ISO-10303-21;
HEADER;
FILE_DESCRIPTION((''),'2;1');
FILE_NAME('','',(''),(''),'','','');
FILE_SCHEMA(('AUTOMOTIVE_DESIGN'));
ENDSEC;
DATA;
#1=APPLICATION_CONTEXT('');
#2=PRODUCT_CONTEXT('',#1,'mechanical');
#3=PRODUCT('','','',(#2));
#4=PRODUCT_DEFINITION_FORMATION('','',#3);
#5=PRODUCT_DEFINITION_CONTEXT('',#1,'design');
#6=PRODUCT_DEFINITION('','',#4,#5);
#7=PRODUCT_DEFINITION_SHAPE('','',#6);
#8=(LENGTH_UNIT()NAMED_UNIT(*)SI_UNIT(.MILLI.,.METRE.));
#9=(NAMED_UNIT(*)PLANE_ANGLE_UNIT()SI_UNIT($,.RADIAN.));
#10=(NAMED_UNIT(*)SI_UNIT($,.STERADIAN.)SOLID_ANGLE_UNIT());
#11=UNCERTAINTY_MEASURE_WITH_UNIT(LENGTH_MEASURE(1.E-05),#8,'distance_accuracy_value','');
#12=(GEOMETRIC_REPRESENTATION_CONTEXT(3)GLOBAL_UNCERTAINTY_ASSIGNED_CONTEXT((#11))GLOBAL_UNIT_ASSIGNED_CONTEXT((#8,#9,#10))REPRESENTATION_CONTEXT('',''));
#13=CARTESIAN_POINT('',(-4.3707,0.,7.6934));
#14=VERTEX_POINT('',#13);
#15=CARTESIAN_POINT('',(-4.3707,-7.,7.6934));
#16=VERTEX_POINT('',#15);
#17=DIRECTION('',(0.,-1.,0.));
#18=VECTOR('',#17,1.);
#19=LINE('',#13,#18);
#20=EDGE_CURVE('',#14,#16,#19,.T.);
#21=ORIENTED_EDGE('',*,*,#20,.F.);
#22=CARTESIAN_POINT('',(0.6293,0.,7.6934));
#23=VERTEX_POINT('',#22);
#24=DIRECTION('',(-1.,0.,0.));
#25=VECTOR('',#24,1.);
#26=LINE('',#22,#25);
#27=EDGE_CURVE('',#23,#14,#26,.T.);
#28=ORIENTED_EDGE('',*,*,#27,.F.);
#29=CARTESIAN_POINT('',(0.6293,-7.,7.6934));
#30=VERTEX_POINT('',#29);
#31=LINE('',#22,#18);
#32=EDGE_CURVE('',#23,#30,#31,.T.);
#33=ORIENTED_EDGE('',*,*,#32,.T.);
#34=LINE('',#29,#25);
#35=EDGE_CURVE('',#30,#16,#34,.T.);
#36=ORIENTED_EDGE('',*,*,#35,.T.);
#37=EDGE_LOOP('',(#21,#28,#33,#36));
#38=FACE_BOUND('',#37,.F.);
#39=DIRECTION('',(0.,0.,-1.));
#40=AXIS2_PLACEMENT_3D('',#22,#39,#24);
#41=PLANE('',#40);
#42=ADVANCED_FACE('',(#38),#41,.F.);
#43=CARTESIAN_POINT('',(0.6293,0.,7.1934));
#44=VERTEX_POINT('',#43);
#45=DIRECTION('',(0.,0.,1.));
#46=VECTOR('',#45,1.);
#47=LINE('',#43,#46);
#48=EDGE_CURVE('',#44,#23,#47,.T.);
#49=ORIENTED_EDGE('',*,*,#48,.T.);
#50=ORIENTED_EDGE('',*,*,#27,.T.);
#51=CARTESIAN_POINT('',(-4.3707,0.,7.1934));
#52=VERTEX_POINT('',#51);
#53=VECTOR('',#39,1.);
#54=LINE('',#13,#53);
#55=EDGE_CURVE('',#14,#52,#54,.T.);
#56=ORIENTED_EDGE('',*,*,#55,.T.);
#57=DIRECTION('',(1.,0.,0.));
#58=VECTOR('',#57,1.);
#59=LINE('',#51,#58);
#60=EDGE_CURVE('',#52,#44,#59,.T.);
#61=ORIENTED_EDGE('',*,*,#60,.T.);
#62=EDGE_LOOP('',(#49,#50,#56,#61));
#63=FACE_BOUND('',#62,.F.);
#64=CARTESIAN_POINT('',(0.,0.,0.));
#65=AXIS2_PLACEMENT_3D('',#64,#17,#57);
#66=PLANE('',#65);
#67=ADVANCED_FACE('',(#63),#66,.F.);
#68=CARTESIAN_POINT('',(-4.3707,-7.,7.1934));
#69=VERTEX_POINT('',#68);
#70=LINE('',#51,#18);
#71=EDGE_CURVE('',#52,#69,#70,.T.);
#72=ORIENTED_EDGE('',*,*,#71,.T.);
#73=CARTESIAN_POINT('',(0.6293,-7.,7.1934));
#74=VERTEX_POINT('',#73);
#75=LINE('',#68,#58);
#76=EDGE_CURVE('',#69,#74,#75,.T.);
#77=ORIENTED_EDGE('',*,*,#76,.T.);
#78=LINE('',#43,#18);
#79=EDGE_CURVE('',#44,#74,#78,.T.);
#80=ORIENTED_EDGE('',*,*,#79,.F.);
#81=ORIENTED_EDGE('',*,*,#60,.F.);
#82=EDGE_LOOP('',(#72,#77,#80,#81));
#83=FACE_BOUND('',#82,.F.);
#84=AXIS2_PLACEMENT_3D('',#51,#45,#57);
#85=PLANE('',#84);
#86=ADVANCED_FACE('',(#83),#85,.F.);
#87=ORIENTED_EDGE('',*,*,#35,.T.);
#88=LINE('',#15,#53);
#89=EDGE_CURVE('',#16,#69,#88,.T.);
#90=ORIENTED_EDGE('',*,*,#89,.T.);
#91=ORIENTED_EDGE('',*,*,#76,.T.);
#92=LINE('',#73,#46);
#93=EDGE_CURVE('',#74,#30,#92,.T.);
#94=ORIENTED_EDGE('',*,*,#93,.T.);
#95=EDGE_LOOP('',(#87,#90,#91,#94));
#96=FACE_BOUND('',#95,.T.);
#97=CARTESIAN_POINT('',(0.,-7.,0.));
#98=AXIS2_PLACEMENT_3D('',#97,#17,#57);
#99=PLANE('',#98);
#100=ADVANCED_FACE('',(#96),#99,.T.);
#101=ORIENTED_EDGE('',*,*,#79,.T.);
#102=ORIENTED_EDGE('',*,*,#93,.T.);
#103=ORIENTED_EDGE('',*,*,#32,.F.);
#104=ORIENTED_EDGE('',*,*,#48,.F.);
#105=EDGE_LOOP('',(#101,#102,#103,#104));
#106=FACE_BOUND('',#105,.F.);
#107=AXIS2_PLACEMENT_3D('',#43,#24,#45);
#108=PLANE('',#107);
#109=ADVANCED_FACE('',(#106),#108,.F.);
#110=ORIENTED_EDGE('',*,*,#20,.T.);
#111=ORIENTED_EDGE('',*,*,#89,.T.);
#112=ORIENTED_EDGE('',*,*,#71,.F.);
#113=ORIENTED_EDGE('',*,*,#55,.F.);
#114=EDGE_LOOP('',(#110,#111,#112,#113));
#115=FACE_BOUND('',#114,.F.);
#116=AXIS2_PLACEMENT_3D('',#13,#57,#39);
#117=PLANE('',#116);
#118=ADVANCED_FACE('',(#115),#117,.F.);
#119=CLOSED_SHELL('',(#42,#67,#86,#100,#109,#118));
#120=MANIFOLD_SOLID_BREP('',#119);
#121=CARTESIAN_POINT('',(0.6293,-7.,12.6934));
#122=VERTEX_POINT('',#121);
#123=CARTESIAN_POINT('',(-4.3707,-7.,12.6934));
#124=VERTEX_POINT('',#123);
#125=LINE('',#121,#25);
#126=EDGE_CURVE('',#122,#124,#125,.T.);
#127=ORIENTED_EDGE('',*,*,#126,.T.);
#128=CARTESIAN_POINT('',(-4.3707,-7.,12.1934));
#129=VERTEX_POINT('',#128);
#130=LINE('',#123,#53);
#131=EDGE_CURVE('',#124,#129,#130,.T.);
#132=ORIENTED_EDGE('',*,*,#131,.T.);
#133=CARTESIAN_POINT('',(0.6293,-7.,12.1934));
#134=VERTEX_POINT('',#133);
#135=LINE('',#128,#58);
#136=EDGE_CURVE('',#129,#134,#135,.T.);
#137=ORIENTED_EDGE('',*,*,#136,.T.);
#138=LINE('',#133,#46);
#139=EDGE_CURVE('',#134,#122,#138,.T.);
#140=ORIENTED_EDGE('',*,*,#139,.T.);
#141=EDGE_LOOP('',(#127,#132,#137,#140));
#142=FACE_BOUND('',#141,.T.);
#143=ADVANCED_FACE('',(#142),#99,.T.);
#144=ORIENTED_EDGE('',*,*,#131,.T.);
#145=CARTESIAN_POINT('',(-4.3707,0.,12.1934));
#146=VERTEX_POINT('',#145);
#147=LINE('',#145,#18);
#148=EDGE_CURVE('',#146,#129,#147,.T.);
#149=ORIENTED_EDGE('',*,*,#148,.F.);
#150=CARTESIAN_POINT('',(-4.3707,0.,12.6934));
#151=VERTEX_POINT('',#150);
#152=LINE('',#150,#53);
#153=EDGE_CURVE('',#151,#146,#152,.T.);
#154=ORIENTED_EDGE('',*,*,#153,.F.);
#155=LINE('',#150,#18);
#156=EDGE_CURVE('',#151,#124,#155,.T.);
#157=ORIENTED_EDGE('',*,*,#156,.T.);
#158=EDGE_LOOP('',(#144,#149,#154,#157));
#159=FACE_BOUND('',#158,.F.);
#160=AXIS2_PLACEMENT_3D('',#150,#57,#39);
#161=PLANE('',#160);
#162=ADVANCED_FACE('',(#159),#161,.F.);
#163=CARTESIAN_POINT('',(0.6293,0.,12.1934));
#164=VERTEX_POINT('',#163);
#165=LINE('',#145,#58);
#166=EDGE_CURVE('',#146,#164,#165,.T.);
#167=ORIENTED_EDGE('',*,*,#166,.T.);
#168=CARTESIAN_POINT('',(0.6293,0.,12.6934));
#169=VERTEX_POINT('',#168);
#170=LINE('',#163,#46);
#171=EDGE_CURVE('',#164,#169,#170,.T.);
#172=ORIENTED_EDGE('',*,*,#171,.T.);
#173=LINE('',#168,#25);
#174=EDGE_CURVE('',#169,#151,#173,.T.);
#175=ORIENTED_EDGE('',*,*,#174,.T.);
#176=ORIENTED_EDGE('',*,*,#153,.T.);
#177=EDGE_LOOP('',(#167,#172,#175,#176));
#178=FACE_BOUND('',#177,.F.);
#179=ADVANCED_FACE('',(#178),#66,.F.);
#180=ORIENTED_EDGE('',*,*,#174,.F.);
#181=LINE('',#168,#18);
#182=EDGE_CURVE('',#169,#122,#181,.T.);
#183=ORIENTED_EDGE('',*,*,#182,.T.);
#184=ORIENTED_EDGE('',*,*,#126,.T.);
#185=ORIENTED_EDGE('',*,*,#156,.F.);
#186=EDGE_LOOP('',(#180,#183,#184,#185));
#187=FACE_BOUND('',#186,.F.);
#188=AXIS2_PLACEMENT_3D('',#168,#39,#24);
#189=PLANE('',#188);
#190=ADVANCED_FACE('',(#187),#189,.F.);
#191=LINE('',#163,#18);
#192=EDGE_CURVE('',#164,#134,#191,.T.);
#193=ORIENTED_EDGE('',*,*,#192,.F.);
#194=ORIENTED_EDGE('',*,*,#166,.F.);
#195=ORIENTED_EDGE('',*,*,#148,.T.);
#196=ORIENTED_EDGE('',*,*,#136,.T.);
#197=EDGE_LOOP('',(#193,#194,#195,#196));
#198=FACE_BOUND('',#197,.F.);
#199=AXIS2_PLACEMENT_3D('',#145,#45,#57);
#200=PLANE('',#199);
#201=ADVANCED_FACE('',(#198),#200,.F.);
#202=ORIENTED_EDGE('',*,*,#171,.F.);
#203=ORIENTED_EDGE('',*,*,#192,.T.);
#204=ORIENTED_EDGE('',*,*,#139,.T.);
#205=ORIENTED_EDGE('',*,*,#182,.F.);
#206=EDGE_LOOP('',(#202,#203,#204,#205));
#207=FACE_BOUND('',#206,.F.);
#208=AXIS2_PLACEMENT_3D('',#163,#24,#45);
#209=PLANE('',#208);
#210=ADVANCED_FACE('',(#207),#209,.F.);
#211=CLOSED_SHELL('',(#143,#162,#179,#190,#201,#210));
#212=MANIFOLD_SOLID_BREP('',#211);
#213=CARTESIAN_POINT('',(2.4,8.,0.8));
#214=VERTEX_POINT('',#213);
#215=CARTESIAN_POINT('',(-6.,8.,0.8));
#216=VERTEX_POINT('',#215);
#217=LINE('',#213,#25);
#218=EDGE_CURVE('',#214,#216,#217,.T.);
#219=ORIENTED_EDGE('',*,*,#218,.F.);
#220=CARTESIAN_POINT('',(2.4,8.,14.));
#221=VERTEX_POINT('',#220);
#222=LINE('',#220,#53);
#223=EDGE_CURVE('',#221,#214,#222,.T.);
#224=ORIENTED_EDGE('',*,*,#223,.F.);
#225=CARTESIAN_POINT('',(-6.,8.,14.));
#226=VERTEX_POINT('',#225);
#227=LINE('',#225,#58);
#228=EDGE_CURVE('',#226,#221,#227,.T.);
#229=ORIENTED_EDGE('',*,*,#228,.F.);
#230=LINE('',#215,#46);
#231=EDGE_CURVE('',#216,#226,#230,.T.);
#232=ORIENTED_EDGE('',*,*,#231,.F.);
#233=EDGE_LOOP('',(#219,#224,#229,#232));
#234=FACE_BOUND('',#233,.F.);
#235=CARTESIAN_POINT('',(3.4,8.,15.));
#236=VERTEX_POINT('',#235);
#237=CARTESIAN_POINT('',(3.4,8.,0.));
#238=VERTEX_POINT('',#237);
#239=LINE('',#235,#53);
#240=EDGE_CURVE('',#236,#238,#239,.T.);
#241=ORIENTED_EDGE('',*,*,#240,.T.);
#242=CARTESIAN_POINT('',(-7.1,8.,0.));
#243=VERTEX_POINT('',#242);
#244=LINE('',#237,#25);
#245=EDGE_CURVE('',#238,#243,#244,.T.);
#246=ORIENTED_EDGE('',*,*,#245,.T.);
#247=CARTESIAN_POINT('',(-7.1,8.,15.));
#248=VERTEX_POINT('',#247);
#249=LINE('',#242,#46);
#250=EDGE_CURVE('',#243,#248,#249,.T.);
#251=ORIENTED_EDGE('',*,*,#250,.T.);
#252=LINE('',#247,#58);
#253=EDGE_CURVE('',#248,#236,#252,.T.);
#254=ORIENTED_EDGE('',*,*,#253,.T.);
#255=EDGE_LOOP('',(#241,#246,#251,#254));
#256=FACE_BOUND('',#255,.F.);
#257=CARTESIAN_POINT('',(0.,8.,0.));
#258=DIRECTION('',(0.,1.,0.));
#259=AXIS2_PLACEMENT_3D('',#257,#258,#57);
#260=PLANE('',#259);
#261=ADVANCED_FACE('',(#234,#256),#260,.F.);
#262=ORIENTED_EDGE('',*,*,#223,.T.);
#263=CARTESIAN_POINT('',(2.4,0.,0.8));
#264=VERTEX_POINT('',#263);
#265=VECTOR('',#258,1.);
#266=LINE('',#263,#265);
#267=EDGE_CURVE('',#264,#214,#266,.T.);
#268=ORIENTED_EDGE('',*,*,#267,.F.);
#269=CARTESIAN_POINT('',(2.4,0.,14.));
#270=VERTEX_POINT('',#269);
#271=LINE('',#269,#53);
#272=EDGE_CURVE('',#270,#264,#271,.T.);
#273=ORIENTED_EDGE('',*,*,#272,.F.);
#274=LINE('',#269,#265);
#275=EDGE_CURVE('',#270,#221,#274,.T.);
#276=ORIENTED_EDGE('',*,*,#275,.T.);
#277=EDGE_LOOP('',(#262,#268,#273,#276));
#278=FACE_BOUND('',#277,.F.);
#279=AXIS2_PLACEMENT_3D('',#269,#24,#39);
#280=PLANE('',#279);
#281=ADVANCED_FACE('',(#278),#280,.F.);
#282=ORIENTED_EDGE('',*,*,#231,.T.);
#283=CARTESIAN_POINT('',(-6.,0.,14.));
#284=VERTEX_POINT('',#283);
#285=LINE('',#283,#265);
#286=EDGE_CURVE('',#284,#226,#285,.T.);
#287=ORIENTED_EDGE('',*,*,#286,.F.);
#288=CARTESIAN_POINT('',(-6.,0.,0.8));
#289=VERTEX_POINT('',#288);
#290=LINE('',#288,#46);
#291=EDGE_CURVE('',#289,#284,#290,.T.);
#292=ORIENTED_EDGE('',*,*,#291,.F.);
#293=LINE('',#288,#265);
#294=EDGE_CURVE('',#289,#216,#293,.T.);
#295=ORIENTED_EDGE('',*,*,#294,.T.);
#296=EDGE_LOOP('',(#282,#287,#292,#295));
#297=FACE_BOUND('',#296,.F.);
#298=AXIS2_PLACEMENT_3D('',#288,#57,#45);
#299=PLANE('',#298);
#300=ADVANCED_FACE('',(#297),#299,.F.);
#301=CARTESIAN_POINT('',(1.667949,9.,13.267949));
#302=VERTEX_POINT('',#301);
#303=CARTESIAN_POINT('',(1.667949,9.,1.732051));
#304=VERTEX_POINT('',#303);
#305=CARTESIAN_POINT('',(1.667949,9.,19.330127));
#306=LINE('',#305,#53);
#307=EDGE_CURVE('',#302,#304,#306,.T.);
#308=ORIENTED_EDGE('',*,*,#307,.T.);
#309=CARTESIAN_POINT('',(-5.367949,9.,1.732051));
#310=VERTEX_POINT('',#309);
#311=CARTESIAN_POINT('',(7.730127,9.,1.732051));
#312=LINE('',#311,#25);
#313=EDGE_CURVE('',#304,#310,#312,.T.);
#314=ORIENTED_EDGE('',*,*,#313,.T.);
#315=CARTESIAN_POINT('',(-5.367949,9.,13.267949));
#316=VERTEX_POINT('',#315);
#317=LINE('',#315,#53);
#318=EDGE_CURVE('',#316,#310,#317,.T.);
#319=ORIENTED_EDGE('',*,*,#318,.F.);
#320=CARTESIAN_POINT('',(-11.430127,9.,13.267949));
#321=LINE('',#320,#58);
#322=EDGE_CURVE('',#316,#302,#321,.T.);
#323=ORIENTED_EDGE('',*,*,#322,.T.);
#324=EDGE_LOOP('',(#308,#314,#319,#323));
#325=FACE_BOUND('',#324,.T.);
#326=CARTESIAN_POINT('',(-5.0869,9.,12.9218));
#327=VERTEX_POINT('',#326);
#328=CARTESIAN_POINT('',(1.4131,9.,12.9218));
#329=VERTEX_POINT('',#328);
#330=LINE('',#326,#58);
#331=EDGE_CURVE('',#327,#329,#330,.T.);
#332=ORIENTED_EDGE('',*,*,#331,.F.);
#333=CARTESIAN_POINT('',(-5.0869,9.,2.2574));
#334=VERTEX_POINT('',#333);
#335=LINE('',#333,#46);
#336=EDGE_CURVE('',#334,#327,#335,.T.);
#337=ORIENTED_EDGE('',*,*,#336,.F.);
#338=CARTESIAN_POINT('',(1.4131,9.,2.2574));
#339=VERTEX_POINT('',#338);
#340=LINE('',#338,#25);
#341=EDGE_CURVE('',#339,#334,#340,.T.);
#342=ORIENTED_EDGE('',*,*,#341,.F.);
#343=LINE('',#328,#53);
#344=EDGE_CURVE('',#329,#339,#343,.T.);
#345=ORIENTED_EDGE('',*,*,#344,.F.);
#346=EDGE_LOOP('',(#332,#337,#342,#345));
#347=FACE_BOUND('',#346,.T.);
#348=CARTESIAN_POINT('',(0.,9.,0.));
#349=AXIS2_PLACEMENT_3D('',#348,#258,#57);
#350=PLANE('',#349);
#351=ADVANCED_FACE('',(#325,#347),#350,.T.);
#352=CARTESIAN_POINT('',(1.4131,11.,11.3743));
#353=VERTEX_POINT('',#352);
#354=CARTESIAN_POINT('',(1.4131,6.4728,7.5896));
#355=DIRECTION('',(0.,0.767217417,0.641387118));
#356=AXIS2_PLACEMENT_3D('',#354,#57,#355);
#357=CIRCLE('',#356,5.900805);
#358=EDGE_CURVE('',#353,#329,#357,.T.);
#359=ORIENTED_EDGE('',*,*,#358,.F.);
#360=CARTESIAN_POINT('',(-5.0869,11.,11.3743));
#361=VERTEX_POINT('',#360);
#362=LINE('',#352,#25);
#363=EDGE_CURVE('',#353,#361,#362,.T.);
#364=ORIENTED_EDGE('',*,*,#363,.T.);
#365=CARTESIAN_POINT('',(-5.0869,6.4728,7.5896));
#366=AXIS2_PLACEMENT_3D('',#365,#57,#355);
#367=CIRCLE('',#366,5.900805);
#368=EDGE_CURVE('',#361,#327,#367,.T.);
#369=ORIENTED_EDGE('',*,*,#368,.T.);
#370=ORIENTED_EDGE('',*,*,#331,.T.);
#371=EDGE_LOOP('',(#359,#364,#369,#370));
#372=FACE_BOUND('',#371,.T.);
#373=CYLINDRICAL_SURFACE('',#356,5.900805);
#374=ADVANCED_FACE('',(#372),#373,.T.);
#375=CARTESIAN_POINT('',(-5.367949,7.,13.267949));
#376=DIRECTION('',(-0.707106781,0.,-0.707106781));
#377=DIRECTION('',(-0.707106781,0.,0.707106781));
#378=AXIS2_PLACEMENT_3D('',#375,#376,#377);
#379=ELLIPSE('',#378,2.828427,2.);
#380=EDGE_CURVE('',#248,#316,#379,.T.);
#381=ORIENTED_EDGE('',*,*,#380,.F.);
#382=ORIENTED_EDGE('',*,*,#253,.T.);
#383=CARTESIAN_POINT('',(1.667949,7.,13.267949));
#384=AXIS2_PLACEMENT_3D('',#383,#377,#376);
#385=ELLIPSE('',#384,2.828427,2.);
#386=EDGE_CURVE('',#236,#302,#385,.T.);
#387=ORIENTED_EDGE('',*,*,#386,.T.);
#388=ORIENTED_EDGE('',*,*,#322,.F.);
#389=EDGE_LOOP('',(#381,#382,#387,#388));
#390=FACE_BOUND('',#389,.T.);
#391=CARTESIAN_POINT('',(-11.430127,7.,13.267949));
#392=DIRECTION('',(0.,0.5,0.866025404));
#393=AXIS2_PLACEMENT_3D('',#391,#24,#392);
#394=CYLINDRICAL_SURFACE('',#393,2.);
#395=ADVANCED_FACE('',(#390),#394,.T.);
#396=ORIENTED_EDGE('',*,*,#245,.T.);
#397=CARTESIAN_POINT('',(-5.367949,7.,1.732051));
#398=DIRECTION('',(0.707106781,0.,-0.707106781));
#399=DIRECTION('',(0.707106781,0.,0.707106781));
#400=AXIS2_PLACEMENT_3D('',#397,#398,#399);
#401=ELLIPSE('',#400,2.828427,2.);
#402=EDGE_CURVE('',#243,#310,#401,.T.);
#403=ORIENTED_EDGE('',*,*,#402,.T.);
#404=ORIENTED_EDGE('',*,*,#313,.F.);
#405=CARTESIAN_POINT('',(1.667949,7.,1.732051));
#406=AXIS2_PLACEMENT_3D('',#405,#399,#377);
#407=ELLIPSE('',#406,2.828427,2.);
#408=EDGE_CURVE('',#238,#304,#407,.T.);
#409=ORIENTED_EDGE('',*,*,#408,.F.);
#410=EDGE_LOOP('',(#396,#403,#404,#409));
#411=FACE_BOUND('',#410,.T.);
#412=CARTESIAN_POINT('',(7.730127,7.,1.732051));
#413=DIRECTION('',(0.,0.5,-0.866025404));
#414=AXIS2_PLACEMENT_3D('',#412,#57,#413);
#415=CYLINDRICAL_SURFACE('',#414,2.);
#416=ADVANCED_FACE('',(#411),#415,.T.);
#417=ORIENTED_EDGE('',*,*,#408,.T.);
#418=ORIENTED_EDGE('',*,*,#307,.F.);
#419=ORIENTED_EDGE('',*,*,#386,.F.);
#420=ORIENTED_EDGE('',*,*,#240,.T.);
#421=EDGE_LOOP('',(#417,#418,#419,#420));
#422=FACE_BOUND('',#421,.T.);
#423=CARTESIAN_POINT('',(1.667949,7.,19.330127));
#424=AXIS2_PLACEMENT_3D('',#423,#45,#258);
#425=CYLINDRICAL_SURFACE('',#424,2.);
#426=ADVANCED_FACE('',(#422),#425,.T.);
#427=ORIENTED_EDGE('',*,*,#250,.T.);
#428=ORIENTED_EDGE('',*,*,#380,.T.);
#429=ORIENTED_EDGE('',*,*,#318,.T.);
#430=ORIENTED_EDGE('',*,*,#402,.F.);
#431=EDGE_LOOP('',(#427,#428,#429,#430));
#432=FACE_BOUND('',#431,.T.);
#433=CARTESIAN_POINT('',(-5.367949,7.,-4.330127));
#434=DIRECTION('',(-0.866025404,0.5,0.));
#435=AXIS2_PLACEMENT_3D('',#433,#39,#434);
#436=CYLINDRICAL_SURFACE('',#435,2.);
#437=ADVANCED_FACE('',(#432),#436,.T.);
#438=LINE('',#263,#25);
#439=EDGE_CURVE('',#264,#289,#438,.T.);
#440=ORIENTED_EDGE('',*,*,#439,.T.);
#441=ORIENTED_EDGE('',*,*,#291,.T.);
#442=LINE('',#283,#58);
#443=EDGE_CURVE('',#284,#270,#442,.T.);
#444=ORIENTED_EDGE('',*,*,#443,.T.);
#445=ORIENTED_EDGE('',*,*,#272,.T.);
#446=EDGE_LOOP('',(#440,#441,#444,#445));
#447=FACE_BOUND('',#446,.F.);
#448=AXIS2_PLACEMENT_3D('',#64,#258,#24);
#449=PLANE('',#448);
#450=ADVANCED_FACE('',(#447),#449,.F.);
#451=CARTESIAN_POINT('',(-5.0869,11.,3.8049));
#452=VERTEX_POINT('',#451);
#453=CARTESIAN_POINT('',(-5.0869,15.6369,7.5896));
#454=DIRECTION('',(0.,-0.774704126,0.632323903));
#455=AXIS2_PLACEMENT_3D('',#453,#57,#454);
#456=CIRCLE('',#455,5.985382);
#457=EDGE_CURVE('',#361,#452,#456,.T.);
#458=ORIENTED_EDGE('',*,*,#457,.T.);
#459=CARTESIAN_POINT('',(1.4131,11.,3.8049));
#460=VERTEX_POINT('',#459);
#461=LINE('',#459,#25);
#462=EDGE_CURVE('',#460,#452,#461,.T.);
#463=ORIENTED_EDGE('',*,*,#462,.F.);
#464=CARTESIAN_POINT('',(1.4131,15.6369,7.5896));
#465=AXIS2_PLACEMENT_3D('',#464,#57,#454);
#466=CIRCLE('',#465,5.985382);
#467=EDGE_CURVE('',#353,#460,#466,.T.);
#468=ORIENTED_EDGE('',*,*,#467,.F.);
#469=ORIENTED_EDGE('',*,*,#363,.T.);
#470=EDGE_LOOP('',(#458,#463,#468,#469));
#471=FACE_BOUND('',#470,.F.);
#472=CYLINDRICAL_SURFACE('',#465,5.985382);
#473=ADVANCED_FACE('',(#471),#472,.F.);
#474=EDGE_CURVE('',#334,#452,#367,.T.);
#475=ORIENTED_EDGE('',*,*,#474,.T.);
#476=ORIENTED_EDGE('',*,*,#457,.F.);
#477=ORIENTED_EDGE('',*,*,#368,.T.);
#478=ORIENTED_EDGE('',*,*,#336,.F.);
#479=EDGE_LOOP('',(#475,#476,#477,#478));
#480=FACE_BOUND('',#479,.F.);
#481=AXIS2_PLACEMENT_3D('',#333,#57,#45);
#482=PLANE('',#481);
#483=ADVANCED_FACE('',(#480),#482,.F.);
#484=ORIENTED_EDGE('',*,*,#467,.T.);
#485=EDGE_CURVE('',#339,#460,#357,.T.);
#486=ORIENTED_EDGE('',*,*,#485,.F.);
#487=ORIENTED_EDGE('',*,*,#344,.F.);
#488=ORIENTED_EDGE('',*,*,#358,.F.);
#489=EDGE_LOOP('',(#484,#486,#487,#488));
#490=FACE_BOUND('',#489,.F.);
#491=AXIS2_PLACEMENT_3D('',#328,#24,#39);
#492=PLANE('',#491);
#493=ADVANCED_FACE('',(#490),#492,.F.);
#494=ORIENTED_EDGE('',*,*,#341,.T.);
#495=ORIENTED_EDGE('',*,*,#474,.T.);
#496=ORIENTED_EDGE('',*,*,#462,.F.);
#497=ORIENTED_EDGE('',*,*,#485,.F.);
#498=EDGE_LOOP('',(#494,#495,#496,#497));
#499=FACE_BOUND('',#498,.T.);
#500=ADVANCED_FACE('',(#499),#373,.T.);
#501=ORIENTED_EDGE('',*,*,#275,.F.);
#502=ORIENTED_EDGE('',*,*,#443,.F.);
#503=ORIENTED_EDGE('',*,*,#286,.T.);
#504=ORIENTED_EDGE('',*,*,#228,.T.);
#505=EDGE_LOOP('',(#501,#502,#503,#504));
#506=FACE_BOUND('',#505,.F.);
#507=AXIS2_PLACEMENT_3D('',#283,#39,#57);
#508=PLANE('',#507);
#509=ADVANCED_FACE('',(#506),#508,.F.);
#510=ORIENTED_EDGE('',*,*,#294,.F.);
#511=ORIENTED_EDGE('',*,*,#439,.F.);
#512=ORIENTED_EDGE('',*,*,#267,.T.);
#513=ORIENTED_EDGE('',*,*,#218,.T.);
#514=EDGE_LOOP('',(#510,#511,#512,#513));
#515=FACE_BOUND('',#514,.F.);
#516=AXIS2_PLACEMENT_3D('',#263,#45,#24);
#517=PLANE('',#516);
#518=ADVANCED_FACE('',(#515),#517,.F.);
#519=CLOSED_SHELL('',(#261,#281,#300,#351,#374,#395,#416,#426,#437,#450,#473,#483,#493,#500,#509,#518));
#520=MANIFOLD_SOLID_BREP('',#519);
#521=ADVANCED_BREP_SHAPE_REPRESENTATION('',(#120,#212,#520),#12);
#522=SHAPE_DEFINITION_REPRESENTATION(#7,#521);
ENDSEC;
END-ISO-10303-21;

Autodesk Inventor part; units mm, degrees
ref_plane "YZ Plane" through (0, 0, 0) normal (1, 0, 0) x (0, 1, 0)
ref_plane "XZ Plane" through (0, 0, 0) normal (0, 1, 0) x (-1, 0, 0)
ref_plane "XY Plane" through (0, 0, 0) normal (0, 0, 1) x (1, 0, 0)
sketch "Эскиз1" plane through (0, 0, 0) normal (0, 1, 0) x (-1, 0, 0)
  line L0 (6, 14) -> (-2.4, 14)
  line L1 (-2.4, 14) -> (-2.4, 0.8)
  line L2 (-2.4, 0.8) -> (6, 0.8)
  line L3 (6, 0.8) -> (6, 14)
  point P0 (0, 0)
  dimension "d0" = 8.4
  dimension "d1" = 13.2
extrude "Выдавливание1" add sketch "Эскиз1" along normal blind 8
sketch "Эскиз2" plane through (0, 8, 0) normal (0, 1, 0) x (1, 0, 0)
  line L0 (-7.1, -15) -> (3.4, -15)
  line L1 (3.4, -15) -> (3.4, 0)
  line L2 (3.4, 0) -> (-7.1, 0)
  line L3 (-7.1, 0) -> (-7.1, -15)
  line L4 (-6, -14) -> (2.4, -14) projected
  line L5 (-6, -0.8) -> (-6, -14) projected
  point P0 (0, 0)
  dimension "d4" = 10.5
  dimension "d5" = 15
  dimension "d6" = 1
  dimension "d7" = 1.1
extrude "Выдавливание2" add sketch "Эскиз2" along normal blind 1
fillet "Сопряжение1" radius 2 4 edges at (-1.85, 9, 15) (3.4, 9, 7.5) (-1.85, 9, 0) (-7.1, 9, 7.5)
sketch "Эскиз3" plane through (0, 9, 0) normal (0, 1, 0) x (1, 0, 0)
  line L0 (-5.0869, -12.9218) -> (1.4131, -12.9218)
  line L1 (1.4131, -12.9218) -> (1.4131, -2.2574)
  line L2 (1.4131, -2.2574) -> (-5.0869, -2.2574)
  line L3 (-5.0869, -2.2574) -> (-5.0869, -12.9218)
  line L4 (-5.3679, -13.2679) -> (-5.3679, -1.7321) projected
  point P0 (0, 0)
  dimension "d12" = 6.5
extrude "Выдавливание3" add sketch "Эскиз3" along normal blind 2
sketch "Эскиз4" plane through (1.4131, 9, 12.9218) normal (1, 0, 0) x (0, 0, -1)
  arc A0 (1.5475, 2) -> (9.1169, 2) centre (5.3322, -2.5272) ccw
  line L0 (0, 0) -> (0, 2)
  line L1 (0, 2) -> (1.5475, 2)
  line L2 (10.6644, 0) -> (10.6644, 2) projected
  line L3 (9.1169, 2) -> (10.6644, 2)
  arc A1 (1.5475, 2) -> (9.1169, 2) centre (5.3322, 6.6369) ccw
  line L4 (1.5475, 2) -> (9.1169, 2)
  line L5 (10.6644, 2) -> (0, 2) projected
  point P0 (12.9218, -9)
extrude "Выдавливание4" cut sketch "Эскиз4" against normal through all contours A0 L0 L1 | L4 A1 | L3 L2 A0
sketch "Эскиз5" plane through (0, 0, 0) normal (0, -1, 0) x (1, 0, 0)
  line L0 (0.6293, 12.6934) -> (-4.3707, 12.6934)
  line L1 (-4.3707, 12.6934) -> (-4.3707, 12.1934)
  line L2 (-4.3707, 12.1934) -> (0.6293, 12.1934)
  line L3 (0.6293, 12.1934) -> (0.6293, 12.6934)
  line L4 (0.6293, 7.6934) -> (-4.3707, 7.6934)
  line L5 (-4.3707, 7.6934) -> (-4.3707, 7.1934)
  line L6 (-4.3707, 7.1934) -> (0.6293, 7.1934)
  line L7 (0.6293, 7.1934) -> (0.6293, 7.6934)
  point P0 (0, 0)
  dimension "d18" = 5
  dimension "d19" = 0.5
  dimension "d22" = 5
extrude "Выдавливание5" add sketch "Эскиз5" along normal blind 7 separate body
properties part number "Выключатель маленький"
